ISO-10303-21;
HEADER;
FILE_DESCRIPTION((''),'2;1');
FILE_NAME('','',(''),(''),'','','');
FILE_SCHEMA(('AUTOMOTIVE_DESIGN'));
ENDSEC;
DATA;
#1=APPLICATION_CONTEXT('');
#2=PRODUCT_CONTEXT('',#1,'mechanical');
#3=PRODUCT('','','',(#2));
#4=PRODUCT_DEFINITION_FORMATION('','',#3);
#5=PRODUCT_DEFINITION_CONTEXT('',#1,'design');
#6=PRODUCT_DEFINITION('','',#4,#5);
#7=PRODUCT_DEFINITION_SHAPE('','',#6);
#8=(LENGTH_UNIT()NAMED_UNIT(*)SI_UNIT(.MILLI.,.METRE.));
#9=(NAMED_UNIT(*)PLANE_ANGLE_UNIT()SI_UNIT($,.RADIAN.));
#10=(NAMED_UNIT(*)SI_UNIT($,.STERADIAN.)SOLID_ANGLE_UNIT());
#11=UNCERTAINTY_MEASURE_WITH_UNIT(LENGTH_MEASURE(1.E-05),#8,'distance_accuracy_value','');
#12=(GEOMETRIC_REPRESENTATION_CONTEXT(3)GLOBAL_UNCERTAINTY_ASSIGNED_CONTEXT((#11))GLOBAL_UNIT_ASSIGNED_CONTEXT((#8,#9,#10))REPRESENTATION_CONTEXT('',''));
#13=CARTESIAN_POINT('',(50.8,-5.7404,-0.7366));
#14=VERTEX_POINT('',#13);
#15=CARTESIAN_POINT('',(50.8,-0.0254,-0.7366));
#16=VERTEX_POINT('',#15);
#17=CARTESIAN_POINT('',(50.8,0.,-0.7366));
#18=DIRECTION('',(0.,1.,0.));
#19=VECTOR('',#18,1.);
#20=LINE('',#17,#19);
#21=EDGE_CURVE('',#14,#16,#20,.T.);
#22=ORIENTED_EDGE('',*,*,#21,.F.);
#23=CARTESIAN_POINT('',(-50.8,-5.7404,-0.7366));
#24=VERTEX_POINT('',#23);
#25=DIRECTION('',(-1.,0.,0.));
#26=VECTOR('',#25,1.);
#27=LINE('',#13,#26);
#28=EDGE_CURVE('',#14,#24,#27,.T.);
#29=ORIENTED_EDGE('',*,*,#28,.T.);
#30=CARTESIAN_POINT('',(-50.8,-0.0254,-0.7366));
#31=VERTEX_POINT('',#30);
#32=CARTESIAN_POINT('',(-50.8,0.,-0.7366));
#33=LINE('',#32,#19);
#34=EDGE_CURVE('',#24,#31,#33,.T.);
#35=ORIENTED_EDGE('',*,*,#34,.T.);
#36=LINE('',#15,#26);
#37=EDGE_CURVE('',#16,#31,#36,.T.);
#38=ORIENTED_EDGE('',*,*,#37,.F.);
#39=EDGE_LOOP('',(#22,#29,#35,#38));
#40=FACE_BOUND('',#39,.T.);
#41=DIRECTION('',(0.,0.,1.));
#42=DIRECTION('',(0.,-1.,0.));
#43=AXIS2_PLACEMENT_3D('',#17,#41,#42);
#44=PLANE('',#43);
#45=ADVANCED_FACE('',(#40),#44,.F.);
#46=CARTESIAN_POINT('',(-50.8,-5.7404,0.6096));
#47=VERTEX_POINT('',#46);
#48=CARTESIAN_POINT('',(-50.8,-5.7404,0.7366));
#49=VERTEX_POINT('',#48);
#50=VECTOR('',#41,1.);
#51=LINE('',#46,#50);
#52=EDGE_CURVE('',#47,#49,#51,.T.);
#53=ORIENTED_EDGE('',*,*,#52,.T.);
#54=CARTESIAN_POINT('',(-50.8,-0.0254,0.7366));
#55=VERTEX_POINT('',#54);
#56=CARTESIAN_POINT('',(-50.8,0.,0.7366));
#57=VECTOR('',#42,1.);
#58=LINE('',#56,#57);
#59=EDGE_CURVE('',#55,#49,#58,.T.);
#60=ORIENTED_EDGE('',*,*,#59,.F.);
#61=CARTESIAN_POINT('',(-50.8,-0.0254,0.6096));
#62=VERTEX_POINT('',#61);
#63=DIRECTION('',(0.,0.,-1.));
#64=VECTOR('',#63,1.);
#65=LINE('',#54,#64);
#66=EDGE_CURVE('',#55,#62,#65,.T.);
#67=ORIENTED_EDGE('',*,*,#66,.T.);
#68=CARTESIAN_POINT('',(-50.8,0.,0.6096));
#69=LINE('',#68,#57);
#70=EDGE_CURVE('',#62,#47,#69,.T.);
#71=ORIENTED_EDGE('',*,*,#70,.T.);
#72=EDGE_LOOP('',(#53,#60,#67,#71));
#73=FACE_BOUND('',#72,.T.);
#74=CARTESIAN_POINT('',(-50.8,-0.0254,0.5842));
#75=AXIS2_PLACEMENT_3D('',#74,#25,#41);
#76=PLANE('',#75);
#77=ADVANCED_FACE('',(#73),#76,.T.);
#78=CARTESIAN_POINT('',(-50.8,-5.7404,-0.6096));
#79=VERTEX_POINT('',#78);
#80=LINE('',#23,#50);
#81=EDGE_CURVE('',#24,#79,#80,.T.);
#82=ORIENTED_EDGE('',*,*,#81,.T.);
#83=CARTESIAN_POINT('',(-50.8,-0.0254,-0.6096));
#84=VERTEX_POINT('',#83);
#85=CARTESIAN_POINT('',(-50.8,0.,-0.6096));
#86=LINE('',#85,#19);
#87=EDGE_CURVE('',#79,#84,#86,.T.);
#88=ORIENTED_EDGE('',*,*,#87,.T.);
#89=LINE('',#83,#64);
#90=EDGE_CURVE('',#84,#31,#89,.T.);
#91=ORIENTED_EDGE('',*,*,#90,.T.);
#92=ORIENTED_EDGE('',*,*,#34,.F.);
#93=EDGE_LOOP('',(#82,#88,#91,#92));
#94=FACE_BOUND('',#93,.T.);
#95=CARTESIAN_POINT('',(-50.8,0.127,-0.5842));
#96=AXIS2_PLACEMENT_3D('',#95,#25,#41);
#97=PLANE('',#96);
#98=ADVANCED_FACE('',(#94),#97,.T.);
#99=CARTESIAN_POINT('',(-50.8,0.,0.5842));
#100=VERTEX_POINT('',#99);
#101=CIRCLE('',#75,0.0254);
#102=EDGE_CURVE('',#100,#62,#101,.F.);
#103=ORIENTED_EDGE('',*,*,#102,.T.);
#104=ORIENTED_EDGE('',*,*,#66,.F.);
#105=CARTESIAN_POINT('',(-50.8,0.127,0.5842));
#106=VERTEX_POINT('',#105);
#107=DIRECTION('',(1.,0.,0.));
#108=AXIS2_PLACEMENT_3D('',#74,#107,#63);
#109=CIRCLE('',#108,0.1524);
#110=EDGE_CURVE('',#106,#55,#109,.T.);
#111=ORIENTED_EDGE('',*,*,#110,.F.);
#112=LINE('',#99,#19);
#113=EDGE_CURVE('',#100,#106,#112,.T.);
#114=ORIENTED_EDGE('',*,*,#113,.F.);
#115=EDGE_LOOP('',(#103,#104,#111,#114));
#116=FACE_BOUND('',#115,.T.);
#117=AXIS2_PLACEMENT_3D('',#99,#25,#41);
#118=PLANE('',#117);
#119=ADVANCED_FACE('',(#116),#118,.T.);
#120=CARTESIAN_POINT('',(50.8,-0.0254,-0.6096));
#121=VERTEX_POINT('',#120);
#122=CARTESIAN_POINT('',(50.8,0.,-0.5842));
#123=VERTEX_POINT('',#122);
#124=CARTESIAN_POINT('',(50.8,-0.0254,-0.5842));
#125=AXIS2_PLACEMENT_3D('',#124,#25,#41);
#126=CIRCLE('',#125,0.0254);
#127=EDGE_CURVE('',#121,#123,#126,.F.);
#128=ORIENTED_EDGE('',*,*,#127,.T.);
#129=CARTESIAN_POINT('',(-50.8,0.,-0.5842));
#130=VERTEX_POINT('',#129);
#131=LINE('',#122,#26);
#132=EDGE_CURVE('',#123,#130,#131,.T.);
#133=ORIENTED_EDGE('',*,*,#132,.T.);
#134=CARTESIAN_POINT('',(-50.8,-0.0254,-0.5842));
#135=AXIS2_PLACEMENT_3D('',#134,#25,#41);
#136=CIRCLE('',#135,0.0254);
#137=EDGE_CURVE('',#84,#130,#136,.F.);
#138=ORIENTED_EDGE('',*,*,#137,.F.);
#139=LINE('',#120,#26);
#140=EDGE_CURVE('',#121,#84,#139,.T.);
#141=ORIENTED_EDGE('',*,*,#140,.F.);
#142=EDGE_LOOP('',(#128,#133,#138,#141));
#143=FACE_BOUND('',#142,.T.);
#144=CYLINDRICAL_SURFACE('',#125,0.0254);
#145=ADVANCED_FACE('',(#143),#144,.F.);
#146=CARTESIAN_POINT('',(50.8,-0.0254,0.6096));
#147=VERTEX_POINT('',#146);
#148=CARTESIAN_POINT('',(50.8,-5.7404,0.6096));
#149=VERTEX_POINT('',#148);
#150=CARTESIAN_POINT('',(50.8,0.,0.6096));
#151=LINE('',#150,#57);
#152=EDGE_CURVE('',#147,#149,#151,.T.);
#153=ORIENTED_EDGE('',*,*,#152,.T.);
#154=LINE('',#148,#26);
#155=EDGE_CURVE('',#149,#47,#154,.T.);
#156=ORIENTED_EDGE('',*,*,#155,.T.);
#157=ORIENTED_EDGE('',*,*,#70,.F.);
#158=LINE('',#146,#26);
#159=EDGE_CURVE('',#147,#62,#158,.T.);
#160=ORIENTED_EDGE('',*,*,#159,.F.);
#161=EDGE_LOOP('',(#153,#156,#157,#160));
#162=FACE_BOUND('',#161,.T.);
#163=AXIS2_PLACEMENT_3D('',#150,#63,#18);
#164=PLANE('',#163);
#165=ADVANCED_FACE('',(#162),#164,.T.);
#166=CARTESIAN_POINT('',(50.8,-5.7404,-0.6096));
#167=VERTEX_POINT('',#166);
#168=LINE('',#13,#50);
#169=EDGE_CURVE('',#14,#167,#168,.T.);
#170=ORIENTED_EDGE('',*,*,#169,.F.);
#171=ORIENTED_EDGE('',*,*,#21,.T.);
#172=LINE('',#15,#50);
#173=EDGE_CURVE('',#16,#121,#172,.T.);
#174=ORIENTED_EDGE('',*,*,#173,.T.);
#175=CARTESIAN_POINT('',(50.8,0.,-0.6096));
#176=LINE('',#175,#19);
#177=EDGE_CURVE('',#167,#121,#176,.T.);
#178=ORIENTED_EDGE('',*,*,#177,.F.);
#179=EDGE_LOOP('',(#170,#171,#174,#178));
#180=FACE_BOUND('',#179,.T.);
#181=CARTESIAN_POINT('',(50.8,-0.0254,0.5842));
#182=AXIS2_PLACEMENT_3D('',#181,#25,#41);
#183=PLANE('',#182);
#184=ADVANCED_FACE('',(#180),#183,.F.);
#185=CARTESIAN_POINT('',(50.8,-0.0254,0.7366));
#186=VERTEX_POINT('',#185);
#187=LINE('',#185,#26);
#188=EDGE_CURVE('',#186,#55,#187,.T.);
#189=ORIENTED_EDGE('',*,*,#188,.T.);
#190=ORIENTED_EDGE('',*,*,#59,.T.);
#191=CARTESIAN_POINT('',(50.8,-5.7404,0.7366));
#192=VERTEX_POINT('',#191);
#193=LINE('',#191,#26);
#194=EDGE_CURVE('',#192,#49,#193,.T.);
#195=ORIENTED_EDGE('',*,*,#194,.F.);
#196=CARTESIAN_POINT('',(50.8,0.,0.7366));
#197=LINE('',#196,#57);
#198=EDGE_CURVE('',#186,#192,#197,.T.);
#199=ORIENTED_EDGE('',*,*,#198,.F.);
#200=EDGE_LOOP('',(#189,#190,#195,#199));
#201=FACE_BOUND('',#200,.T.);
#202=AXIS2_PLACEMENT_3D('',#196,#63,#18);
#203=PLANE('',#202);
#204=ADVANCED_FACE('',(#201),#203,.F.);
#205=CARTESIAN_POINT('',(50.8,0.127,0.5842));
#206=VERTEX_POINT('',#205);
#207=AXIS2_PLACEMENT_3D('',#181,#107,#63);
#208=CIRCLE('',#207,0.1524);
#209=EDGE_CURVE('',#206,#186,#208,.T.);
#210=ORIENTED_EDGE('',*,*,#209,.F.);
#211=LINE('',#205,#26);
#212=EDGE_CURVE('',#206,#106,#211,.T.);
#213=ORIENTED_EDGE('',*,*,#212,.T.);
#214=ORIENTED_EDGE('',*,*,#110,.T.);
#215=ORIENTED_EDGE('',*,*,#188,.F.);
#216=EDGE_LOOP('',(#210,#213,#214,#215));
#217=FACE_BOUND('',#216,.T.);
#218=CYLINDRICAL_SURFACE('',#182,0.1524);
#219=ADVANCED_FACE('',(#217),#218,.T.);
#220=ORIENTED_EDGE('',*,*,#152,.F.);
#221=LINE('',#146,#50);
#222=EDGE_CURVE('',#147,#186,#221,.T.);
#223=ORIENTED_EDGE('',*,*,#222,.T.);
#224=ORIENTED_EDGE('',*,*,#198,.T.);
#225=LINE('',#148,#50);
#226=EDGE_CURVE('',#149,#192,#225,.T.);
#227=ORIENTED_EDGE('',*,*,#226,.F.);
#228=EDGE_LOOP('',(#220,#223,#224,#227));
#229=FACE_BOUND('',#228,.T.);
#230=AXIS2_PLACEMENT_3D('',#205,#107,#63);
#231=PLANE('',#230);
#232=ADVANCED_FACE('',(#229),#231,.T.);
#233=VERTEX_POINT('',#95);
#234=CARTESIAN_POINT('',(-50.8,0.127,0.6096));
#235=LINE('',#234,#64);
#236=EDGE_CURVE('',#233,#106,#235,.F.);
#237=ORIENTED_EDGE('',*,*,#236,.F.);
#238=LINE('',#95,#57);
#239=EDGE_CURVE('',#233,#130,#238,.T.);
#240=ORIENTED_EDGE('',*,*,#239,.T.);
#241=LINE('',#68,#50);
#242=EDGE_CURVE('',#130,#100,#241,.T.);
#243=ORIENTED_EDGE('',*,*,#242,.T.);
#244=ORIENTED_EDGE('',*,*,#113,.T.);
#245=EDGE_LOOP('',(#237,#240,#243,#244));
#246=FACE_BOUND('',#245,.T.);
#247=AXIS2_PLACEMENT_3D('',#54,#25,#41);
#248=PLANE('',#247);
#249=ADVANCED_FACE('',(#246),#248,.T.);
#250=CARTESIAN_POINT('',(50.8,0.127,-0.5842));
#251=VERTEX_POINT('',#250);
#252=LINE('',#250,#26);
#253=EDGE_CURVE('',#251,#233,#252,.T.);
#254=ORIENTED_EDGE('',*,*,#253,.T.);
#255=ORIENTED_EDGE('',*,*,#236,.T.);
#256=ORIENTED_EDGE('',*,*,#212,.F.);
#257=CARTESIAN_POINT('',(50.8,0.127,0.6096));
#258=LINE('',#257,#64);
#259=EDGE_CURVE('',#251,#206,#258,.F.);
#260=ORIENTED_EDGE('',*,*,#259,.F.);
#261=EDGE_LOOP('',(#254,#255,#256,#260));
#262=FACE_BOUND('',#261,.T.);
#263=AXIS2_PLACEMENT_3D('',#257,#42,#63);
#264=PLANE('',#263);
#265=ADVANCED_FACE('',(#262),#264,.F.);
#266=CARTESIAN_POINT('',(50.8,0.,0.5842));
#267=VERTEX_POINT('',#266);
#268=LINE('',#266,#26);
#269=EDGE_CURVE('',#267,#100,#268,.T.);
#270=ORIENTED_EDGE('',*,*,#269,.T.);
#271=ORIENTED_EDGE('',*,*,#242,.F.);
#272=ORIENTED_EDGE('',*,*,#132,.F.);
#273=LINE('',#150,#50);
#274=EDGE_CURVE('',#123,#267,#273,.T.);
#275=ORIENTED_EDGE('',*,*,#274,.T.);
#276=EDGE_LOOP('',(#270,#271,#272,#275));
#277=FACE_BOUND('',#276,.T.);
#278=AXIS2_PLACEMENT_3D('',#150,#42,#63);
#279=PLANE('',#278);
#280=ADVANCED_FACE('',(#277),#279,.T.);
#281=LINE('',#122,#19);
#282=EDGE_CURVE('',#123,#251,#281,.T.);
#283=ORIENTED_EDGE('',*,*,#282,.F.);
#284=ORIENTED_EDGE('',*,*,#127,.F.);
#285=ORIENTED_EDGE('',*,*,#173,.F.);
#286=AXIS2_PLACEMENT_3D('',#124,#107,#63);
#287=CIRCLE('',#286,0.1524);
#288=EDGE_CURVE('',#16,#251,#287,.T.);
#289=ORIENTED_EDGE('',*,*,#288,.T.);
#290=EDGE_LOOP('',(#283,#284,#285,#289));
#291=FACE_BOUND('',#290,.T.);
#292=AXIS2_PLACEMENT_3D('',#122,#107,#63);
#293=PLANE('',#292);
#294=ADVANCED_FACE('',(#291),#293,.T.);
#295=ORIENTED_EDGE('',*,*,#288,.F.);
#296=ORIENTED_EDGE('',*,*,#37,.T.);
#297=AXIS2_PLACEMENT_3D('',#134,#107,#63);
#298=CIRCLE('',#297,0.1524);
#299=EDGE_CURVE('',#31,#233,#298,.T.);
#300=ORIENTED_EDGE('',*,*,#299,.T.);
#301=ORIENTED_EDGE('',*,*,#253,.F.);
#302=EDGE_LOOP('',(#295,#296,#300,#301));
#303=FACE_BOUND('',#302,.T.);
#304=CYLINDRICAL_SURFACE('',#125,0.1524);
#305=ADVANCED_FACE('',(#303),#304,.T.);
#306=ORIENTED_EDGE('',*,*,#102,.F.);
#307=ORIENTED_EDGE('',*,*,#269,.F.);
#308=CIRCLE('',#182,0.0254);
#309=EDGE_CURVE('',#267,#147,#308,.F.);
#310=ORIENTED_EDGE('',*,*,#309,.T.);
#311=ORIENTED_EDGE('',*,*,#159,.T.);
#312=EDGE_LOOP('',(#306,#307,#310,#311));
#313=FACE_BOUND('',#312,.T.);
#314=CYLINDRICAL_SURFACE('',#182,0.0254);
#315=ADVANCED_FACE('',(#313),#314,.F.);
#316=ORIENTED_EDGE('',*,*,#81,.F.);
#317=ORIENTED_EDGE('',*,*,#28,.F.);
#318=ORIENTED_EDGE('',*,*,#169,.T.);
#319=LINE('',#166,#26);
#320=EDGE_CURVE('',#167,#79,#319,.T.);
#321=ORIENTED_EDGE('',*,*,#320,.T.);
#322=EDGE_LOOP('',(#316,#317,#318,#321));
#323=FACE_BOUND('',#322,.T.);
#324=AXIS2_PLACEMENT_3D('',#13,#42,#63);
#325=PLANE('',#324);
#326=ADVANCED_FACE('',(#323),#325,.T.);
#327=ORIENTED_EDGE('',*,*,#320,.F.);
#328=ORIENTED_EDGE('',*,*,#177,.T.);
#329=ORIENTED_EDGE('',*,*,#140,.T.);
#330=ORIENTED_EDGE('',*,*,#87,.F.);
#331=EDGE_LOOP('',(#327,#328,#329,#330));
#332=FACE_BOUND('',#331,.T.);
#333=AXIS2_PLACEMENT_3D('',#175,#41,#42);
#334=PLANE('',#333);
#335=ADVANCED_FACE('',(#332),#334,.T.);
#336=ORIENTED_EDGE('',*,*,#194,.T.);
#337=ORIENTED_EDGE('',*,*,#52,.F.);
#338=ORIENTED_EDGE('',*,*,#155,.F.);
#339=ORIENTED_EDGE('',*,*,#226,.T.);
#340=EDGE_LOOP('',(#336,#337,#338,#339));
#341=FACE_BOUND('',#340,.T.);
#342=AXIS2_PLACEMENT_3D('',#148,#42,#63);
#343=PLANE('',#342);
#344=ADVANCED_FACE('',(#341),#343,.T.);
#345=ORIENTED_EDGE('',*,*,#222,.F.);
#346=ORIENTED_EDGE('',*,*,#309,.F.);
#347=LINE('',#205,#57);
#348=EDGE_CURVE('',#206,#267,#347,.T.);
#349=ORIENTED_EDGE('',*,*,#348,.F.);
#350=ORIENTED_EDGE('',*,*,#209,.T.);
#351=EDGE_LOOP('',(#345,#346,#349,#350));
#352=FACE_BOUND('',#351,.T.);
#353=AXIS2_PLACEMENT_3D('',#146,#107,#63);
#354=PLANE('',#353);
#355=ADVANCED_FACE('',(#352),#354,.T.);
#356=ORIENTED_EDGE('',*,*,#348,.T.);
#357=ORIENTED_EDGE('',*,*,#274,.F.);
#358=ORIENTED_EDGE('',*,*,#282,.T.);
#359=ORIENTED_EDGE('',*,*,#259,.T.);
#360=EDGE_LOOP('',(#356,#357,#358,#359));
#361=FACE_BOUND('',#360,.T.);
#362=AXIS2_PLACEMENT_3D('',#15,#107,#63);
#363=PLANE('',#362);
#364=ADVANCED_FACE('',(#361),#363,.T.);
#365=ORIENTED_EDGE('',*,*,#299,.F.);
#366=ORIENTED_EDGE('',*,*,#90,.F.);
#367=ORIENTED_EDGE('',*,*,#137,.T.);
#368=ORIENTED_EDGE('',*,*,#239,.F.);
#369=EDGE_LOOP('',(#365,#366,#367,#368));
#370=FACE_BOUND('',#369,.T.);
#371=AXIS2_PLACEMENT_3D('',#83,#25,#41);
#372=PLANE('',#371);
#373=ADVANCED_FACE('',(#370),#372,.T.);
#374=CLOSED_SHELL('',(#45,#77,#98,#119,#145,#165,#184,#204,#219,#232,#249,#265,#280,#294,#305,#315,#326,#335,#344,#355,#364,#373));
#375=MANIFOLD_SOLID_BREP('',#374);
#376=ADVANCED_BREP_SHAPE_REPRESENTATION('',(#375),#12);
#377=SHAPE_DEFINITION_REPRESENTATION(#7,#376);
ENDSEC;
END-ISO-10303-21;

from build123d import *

# Parameters (mm, degrees)
BASE_FLANGE1_DEPTH = 50.8


# Sheet-metal steps are written as plain solids
with BuildPart() as part:
    # Sketch1 → Base-Flange1 (new, symmetric)
    with BuildSketch(Plane(origin=(0, 0, 0), x_dir=(0, 0, -1), z_dir=(1, 0, 0))):
        with BuildLine():
            Line((-0.6096, -5.7404), (-0.6096, -0.0254))
            ThreePointArc((-0.6096, -0.0254), (-0.602160512, -0.007439488), (-0.5842, 0))
            Line((-0.5842, 0), (0.5842, 0))
            ThreePointArc((0.5842, 0), (0.602160512, -0.007439488), (0.6096, -0.0254))
            Line((0.6096, -0.0254), (0.6096, -5.7404))
            Line((0.6096, -5.7404), (0.7366, -5.7404))
            Line((0.7366, -5.7404), (0.7366, -0.0254))
            ThreePointArc((0.7366, -0.0254), (0.691963073, 0.082363073), (0.5842, 0.127))
            Line((0.5842, 0.127), (-0.5842, 0.127))
            ThreePointArc((-0.5842, 0.127), (-0.691963073, 0.082363073), (-0.7366, -0.0254))
            Line((-0.7366, -0.0254), (-0.7366, -5.7404))
            Line((-0.7366, -5.7404), (-0.6096, -5.7404))
        make_face()
    extrude(amount=BASE_FLANGE1_DEPTH, both=True)


solid = part.part
